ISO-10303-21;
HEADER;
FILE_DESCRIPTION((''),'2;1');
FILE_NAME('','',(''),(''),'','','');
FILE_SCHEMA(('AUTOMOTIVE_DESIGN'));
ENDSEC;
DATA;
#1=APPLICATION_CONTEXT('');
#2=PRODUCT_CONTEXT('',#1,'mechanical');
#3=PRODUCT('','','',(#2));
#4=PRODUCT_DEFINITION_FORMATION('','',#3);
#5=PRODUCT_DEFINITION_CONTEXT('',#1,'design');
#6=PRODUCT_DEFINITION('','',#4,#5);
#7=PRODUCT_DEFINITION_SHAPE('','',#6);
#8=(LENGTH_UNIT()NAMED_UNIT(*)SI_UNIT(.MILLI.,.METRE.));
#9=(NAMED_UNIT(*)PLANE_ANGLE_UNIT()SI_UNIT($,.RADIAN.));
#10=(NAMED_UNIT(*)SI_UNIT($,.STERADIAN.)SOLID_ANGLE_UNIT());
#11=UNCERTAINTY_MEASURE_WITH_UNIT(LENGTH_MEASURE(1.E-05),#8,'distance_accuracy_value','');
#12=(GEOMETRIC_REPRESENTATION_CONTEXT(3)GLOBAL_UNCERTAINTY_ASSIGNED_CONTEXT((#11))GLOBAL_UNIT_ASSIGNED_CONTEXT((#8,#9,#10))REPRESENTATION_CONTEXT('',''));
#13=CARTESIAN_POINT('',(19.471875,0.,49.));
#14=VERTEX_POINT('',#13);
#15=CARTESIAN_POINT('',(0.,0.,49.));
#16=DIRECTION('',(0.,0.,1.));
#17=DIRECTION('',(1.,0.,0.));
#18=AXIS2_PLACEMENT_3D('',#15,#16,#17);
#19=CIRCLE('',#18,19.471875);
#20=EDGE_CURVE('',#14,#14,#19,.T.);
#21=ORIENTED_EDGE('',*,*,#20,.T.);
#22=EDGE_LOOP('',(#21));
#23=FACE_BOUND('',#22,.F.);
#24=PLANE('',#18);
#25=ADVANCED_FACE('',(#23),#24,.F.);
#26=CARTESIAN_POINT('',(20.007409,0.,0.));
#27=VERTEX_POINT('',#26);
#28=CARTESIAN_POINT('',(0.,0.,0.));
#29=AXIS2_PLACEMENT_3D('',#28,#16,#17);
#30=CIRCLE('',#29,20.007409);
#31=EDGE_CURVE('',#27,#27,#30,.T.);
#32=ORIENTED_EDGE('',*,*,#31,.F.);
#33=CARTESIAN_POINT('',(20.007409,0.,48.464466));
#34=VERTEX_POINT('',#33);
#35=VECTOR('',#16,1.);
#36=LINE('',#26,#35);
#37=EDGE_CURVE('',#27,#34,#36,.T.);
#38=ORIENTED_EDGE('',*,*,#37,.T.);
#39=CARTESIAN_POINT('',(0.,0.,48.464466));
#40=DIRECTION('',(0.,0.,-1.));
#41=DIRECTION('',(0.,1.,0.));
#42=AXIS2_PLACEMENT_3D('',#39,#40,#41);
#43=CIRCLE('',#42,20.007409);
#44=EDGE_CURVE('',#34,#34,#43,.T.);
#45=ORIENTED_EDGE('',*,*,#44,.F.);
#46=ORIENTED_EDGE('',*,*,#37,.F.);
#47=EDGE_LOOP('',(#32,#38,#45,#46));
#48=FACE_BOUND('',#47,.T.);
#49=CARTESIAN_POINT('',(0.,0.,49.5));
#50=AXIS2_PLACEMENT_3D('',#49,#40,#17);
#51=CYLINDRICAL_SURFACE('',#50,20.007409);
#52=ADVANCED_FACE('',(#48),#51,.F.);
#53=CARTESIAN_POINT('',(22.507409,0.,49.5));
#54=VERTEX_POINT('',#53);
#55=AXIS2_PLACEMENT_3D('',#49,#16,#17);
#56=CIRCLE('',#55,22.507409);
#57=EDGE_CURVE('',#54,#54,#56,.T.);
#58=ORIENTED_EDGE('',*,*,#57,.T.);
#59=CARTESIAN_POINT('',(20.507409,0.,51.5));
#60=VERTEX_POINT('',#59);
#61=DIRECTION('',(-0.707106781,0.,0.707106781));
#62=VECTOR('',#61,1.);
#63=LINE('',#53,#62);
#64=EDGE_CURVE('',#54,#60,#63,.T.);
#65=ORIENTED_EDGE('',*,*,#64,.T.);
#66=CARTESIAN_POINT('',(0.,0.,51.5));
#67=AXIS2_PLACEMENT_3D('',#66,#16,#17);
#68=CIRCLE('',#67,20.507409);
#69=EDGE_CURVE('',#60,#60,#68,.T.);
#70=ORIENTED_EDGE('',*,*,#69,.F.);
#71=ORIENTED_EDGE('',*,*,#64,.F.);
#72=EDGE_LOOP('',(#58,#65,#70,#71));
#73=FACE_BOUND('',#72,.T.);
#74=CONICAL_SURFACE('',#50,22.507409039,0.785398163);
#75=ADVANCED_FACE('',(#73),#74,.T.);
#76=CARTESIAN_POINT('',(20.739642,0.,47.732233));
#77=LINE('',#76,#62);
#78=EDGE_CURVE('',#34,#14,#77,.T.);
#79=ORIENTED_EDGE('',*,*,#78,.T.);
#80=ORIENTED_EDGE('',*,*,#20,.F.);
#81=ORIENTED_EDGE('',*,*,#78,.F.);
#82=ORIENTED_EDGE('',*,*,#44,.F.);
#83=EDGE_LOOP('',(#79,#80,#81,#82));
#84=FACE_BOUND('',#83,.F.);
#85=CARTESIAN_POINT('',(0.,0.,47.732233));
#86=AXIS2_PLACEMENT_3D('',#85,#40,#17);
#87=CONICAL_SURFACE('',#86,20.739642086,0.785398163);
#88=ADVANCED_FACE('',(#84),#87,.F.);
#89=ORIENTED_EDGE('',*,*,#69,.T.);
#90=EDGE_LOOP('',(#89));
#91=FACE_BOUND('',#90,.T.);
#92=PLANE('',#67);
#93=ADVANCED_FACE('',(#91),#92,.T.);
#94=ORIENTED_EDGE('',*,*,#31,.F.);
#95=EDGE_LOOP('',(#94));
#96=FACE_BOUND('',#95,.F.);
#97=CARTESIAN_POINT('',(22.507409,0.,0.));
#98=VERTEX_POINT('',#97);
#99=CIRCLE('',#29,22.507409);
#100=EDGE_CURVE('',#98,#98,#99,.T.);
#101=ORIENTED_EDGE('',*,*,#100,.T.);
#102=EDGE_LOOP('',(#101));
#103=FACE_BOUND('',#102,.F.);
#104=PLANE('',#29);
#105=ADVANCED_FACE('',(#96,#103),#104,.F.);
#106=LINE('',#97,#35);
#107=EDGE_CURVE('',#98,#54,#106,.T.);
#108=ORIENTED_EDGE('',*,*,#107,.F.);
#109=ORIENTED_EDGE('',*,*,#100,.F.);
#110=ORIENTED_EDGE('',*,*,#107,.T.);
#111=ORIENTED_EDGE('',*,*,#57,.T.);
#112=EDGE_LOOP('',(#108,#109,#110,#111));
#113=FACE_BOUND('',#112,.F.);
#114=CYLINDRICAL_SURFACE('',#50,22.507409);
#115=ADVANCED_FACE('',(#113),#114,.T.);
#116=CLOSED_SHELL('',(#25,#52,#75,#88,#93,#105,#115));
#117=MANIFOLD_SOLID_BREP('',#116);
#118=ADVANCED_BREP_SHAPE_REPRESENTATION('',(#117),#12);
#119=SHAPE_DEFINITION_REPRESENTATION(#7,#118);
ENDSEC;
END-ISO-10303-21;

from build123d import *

# Parameters (mm, degrees)
F0_R     = 22.5074090386
F1_DEPTH = 49.5
F2_DEPTH = 2
F3_SIZE  = 2
F4_T     = -2.5


with BuildPart() as f1:
    # F0 (on Top) → F1 (new body)
    with BuildSketch(Plane.XY):
        Circle(F0_R)
    extrude(amount=F1_DEPTH)

    # F2 (add): a face of the model
    f2_faces = [f1.faces().sort_by_distance(p)[0] for p in [
        (0, 0, 49.5),
    ]]
    extrude(f2_faces, amount=F2_DEPTH)

    # F3
    f3_edges = [f1.edges().sort_by_distance(p)[0] for p in [
        (-22.507409, 0, 51.5),
    ]]
    chamfer(f3_edges, length=F3_SIZE)

    # F4
    f4_openings = [f1.faces().sort_by_distance(p)[0] for p in [
        (0, 0, 0),
    ]]
    offset(amount=F4_T, openings=f4_openings)


solid = f1.part
